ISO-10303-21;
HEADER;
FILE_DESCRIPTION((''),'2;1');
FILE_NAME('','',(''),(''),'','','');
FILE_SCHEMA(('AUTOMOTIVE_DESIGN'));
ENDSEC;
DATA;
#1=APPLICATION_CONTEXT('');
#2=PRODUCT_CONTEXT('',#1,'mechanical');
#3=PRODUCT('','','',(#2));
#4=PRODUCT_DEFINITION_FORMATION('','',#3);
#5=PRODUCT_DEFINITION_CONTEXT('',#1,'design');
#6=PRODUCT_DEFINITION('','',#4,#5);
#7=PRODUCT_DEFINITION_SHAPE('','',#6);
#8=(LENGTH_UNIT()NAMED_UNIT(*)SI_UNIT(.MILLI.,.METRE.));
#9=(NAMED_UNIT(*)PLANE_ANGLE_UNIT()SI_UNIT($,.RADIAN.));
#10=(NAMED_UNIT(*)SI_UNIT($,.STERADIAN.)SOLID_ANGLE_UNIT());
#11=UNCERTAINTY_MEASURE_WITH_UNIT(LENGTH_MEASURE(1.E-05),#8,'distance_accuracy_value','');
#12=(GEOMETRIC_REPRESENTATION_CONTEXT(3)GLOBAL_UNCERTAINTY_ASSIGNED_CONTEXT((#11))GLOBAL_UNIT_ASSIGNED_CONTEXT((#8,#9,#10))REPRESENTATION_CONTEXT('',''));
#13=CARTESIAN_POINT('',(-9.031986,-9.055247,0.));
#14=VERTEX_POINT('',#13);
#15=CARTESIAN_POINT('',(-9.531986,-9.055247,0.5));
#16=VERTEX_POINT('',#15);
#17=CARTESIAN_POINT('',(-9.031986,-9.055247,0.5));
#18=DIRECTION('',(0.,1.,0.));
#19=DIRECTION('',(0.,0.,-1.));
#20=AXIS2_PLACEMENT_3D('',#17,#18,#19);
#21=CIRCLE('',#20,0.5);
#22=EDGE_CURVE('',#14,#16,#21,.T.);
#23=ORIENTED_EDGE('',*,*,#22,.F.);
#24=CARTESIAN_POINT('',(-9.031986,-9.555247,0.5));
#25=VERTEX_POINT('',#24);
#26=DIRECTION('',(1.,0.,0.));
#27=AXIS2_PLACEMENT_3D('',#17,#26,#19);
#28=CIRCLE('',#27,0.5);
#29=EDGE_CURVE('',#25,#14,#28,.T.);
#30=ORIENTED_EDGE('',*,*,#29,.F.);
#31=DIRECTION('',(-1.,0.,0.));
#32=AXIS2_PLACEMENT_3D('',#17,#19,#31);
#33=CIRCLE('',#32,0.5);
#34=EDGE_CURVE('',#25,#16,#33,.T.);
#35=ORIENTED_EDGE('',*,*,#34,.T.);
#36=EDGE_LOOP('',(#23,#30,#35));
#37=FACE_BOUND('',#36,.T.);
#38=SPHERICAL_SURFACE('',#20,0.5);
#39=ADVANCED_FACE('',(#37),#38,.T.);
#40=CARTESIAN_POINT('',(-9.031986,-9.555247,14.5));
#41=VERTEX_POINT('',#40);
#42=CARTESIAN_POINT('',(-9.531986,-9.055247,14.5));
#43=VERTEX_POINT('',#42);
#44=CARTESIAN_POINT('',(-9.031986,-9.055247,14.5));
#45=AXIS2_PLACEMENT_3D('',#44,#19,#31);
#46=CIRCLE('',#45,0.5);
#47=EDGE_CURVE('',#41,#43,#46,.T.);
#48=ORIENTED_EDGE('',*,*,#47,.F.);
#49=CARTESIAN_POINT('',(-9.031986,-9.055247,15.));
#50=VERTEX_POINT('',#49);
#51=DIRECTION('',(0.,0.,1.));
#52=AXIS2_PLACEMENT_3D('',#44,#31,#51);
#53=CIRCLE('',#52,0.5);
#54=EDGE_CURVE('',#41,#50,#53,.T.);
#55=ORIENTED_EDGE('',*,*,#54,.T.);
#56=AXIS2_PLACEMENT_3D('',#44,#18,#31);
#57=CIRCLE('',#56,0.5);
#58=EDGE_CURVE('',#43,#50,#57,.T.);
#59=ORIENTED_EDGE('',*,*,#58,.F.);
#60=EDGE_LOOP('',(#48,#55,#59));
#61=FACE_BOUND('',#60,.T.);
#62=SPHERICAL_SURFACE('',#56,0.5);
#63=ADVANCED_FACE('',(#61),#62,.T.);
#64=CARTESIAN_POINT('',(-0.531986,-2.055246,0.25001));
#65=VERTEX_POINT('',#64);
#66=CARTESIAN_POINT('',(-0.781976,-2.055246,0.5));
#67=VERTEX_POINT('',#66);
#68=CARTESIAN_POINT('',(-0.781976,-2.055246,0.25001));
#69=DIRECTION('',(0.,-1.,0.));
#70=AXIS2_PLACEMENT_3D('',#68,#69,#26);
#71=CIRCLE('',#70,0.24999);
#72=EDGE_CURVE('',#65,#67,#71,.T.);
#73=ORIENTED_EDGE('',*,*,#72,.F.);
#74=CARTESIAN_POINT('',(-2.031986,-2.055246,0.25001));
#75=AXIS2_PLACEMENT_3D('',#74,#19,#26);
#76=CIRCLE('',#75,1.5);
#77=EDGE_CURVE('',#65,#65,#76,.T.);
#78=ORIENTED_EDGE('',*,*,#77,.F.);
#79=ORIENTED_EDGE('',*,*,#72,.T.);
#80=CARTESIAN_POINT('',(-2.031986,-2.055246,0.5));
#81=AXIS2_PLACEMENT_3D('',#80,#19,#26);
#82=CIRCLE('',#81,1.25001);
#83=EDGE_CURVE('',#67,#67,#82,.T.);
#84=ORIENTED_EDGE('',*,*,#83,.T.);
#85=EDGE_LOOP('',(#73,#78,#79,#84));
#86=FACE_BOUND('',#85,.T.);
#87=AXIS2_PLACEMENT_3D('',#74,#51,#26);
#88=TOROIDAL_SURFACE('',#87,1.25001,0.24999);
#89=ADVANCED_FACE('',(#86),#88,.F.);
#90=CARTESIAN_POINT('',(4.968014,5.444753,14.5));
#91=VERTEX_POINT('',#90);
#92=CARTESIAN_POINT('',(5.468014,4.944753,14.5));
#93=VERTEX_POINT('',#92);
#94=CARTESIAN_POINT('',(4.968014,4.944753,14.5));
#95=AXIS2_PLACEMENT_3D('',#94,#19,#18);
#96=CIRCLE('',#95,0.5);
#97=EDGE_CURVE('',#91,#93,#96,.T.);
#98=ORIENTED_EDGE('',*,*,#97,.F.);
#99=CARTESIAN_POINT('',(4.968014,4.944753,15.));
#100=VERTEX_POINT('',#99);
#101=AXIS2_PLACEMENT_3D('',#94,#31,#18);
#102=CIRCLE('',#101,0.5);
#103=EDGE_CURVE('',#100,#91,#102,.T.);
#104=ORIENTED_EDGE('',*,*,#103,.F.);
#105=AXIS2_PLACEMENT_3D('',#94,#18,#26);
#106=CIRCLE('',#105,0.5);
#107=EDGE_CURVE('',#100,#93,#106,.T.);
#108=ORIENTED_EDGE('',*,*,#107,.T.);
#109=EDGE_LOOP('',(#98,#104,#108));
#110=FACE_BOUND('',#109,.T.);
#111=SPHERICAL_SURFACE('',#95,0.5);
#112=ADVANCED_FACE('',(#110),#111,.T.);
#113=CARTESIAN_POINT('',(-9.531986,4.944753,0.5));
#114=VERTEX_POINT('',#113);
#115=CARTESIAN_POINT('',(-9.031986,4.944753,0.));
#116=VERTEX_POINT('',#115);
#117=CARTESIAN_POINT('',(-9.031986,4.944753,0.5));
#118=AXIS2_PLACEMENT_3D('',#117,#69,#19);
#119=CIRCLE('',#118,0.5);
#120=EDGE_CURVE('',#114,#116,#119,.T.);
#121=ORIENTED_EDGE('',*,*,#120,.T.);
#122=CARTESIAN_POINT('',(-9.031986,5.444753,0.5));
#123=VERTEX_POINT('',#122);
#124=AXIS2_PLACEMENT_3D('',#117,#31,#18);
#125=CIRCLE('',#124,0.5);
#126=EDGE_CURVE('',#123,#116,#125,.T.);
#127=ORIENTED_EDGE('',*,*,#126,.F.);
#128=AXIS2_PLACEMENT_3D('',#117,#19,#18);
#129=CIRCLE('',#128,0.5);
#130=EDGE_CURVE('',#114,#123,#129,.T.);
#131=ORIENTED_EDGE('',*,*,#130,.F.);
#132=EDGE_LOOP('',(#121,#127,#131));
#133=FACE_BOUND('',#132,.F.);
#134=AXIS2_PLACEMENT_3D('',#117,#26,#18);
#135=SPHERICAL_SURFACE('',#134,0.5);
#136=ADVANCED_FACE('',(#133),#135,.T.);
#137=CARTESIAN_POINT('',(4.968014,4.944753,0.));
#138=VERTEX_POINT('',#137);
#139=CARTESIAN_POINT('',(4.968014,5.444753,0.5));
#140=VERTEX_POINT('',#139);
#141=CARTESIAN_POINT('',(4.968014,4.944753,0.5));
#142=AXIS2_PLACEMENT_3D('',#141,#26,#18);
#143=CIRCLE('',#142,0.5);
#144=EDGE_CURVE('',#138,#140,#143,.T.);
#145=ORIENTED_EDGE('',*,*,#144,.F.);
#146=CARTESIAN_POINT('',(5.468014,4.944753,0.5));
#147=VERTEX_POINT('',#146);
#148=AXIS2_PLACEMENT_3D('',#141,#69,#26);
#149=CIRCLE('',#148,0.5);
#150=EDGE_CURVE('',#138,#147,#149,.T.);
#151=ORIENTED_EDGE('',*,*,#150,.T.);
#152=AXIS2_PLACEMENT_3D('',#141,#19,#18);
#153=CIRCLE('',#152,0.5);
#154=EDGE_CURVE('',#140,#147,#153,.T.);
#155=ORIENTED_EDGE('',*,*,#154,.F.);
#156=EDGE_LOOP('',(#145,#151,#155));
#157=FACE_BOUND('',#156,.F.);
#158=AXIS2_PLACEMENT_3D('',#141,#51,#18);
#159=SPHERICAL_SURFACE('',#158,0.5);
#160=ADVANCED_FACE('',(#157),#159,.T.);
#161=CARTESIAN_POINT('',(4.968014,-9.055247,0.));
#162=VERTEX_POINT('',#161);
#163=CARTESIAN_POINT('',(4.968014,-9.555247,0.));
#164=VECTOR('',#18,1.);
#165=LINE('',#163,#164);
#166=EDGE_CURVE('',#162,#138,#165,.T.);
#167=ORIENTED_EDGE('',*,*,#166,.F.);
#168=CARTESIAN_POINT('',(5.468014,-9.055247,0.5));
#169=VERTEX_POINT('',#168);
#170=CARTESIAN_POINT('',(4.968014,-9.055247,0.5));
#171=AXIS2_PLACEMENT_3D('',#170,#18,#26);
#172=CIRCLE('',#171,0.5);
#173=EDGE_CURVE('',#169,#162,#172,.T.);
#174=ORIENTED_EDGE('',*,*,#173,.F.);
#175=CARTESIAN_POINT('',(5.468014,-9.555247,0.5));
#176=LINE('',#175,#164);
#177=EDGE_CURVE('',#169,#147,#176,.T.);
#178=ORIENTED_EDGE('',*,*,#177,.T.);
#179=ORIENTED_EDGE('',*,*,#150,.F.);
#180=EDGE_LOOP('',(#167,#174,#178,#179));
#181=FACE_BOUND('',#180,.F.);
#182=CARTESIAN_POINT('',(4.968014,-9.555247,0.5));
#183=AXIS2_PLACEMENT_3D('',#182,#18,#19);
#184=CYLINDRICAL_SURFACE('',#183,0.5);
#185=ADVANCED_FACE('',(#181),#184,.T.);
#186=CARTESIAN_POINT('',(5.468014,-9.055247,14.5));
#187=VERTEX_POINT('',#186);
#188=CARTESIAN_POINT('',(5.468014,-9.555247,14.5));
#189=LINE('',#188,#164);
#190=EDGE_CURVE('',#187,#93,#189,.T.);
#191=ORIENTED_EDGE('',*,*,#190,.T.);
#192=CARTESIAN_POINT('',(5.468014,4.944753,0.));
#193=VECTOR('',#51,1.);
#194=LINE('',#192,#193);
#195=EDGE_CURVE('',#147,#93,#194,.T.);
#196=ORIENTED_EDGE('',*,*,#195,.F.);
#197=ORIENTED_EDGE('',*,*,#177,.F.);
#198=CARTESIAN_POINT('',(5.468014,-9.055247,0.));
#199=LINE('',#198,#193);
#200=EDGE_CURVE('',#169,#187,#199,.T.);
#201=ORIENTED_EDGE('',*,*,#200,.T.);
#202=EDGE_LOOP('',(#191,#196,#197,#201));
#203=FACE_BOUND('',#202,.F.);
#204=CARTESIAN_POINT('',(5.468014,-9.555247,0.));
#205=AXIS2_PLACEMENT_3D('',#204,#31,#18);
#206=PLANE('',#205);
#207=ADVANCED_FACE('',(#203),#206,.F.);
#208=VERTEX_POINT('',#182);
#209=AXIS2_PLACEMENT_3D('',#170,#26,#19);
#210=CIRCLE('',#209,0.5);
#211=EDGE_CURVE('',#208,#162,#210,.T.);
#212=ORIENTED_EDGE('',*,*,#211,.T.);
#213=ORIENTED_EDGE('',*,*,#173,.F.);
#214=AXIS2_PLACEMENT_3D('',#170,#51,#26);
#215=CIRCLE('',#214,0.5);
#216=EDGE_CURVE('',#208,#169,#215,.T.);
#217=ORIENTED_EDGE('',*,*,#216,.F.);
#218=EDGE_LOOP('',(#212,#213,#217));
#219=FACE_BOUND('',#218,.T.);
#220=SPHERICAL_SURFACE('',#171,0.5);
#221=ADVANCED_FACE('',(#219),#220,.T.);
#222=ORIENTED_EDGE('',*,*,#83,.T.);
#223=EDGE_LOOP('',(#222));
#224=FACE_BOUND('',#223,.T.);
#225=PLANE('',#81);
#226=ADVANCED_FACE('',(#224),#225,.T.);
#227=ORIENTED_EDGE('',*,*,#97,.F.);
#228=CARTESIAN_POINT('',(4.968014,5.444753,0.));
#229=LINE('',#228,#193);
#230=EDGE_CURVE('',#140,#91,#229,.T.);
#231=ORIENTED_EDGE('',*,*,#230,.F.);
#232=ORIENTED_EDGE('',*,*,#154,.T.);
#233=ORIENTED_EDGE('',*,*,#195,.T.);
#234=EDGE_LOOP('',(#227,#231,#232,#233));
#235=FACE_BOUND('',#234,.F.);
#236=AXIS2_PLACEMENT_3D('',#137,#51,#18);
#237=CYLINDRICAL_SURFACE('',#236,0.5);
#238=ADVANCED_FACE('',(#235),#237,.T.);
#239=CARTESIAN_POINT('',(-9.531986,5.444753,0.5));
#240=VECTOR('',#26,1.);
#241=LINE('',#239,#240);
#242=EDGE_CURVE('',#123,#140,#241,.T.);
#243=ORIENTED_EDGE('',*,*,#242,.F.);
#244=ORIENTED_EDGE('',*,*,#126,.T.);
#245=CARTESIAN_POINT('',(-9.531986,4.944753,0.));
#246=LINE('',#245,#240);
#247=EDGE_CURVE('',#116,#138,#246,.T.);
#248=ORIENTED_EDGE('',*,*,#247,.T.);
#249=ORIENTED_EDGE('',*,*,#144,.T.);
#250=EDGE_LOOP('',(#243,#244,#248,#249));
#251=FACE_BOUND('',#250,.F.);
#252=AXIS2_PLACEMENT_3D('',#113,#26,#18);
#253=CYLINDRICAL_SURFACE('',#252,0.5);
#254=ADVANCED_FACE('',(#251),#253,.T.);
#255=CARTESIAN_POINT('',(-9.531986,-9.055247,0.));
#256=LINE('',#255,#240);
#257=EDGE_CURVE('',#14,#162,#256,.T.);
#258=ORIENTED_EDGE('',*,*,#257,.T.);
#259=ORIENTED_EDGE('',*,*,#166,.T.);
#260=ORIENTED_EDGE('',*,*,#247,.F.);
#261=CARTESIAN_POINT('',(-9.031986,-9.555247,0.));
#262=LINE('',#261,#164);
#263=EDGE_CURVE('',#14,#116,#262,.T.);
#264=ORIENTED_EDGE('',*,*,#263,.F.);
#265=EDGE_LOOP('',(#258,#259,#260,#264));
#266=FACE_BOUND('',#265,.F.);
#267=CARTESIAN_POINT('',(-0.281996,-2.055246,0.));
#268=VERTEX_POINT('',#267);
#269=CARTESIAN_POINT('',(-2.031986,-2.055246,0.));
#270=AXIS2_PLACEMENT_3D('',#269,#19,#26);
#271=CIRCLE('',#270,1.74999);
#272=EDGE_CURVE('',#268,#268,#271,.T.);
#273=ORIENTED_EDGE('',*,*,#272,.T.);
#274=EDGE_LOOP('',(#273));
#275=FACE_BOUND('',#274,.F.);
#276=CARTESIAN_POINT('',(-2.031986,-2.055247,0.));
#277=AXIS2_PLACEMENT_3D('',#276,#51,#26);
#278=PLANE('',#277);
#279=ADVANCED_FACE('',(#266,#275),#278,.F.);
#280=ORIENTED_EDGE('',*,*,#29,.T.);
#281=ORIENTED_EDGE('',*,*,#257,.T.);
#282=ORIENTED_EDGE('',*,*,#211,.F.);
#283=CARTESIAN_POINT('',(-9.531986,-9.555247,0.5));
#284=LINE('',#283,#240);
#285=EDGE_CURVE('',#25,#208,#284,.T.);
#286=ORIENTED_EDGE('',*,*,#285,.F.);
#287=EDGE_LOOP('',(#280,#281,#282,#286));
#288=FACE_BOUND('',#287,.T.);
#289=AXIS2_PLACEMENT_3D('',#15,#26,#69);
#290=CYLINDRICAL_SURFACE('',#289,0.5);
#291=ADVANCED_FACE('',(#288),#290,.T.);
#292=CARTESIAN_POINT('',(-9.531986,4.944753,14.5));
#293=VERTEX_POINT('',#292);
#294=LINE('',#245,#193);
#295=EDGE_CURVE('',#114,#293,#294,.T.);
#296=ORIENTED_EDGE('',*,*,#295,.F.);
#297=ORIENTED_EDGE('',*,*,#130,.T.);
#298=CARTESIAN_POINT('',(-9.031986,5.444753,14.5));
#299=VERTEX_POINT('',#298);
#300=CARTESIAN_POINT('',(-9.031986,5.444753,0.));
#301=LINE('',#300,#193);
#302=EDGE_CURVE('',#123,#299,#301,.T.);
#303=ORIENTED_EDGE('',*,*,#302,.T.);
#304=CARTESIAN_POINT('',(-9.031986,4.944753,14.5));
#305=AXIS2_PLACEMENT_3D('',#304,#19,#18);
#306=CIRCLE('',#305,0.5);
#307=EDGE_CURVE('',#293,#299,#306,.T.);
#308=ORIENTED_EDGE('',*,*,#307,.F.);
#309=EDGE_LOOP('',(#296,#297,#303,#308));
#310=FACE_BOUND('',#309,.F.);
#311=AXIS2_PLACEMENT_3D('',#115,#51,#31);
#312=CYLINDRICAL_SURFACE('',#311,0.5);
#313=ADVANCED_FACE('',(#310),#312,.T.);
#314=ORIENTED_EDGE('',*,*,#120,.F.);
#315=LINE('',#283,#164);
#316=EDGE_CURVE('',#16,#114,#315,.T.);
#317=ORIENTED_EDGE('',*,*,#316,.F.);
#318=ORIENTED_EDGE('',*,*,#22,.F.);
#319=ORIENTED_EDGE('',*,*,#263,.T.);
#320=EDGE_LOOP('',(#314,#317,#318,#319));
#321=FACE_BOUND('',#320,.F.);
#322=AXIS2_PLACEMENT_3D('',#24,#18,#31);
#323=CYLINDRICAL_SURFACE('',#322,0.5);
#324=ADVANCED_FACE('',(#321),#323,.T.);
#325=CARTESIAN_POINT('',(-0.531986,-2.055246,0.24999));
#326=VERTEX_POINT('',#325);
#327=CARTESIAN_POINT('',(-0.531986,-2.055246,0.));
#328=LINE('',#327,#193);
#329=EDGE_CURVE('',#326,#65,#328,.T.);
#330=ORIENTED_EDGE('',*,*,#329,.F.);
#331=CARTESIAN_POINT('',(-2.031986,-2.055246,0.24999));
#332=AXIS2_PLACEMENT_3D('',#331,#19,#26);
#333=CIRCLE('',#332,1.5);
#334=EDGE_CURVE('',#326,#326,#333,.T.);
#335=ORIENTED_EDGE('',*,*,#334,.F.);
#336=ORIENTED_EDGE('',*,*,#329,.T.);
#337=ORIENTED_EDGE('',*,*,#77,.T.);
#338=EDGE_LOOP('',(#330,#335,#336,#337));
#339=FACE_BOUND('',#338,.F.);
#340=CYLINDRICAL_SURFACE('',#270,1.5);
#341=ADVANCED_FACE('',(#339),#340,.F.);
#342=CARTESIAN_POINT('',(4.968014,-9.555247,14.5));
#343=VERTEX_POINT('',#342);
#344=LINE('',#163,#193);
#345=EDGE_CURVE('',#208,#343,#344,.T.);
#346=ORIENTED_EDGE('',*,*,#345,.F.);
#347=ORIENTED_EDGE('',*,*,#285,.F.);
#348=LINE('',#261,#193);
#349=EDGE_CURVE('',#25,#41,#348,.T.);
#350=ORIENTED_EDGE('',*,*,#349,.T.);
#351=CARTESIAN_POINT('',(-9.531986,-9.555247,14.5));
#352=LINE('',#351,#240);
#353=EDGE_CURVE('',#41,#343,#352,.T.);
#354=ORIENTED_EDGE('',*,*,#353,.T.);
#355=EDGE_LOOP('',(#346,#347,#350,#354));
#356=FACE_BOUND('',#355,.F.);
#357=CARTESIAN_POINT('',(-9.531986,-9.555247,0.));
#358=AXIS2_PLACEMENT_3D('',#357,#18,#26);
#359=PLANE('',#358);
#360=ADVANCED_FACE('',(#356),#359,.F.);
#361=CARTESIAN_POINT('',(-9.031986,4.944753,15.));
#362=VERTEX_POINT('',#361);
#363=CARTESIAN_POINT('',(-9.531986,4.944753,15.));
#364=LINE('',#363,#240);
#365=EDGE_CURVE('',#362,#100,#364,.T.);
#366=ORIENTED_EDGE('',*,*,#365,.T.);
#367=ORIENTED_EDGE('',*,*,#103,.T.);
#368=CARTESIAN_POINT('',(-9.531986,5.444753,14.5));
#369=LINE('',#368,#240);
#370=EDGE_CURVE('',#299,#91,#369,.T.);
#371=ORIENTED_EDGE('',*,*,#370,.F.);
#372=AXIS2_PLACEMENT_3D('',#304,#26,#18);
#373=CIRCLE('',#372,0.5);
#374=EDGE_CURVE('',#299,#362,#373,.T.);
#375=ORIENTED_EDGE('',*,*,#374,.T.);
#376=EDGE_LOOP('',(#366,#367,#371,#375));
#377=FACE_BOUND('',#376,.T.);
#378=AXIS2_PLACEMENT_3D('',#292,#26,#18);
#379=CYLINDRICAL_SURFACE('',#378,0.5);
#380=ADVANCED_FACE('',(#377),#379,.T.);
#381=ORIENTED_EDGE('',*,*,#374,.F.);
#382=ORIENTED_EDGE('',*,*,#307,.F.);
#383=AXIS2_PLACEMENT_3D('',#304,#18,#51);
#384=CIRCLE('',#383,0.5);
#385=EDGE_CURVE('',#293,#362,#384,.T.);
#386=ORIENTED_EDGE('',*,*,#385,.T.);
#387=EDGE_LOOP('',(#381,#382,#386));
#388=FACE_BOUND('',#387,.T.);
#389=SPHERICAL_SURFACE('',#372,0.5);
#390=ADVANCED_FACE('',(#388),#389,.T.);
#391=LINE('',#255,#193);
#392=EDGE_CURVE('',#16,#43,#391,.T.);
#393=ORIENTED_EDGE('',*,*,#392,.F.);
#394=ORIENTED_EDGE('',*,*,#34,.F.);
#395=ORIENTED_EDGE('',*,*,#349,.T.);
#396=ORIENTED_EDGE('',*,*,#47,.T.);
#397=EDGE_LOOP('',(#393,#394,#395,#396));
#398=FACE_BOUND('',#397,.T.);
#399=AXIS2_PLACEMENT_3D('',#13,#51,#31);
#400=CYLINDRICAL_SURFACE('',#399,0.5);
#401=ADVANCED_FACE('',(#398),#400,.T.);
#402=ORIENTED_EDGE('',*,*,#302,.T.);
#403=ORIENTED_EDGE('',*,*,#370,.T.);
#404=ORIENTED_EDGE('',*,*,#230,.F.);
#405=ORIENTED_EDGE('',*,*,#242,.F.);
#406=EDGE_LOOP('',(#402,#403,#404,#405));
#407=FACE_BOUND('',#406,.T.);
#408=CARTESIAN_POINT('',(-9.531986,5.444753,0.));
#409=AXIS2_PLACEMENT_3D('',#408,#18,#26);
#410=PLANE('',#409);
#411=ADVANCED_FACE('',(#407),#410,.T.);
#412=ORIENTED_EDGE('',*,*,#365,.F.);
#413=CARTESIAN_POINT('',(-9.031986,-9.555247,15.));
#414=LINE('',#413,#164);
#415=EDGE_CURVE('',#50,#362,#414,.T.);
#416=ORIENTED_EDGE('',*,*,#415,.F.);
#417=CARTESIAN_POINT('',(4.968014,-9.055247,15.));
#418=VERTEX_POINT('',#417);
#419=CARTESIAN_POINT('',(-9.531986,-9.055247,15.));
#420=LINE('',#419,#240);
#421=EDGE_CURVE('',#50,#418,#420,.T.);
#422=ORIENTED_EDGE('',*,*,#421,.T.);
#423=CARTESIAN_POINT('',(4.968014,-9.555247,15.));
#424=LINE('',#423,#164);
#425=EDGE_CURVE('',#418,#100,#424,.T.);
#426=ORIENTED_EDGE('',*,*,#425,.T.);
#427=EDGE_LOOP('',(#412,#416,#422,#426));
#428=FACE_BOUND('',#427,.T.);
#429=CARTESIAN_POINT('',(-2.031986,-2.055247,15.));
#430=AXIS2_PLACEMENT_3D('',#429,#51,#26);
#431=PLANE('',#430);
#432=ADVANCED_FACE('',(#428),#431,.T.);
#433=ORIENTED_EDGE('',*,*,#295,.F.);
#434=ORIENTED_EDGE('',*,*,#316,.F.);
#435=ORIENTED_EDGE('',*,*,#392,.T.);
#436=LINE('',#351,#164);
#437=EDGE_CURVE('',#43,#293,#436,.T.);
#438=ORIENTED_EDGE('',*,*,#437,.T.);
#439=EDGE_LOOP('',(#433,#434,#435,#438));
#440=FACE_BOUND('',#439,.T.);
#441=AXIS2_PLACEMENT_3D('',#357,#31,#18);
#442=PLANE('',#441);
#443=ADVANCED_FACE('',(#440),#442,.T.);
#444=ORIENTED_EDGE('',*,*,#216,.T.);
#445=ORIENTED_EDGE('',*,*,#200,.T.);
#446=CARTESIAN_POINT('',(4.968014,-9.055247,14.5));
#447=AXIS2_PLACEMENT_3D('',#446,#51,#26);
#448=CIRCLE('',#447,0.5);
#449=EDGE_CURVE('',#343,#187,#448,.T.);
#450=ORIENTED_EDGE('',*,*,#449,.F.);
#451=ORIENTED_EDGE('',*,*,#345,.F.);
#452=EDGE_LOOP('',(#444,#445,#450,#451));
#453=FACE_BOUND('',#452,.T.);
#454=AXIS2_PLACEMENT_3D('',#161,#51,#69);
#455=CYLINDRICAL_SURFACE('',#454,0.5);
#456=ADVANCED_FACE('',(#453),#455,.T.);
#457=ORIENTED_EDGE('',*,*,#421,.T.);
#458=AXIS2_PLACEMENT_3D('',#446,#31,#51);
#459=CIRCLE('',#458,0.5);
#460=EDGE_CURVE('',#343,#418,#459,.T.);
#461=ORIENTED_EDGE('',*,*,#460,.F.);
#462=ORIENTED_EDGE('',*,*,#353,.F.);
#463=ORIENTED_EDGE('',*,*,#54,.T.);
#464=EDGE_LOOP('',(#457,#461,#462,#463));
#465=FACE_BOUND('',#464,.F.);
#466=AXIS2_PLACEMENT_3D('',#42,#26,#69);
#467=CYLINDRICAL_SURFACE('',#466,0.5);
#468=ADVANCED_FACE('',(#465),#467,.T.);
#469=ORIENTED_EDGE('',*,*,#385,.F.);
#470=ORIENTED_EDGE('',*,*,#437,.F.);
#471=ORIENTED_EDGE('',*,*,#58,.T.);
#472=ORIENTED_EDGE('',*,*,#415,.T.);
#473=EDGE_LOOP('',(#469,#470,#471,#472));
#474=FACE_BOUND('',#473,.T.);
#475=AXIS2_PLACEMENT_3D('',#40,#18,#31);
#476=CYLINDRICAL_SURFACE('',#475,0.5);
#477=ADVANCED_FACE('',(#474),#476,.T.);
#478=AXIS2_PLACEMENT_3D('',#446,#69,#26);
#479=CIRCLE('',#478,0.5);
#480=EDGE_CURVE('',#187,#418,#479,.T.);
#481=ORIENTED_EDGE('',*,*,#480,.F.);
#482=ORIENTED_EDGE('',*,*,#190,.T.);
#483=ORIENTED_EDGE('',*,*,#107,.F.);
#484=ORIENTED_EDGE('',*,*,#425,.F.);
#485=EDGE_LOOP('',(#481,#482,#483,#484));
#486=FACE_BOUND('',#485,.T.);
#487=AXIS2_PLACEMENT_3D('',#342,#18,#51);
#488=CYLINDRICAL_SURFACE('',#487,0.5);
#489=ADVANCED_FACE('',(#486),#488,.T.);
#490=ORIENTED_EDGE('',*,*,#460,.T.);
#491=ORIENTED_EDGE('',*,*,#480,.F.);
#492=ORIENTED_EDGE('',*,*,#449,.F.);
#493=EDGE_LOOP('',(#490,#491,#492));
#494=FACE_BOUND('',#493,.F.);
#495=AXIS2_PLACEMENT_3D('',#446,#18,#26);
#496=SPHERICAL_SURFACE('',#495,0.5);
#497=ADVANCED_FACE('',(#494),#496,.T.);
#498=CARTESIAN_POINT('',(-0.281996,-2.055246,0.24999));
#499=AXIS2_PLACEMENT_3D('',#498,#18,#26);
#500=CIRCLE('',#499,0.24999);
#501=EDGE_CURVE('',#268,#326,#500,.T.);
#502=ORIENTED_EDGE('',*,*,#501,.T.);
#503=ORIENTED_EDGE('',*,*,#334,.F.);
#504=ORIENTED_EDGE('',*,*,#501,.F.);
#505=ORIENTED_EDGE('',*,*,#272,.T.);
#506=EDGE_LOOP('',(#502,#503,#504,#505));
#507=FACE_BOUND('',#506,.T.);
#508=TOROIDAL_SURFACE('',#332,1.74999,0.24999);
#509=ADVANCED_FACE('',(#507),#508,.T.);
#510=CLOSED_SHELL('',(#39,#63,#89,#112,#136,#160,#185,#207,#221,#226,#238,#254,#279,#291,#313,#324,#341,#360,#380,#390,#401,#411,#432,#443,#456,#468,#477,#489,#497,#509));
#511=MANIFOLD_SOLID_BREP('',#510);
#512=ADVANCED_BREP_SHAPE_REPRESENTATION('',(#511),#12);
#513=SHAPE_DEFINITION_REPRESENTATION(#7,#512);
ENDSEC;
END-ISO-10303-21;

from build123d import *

# Parameters (mm, degrees)
F0_W     = 15
F0_H     = 15
F1_DEPTH = 15
F2_R     = 1.5
F3_DEPTH = 0.5
F4_R     = 0.5
F5_R     = 0.24999


# Not quite as in the source:
# - a fillet or chamfer is up to 0.001 mm smaller than in the source, because OpenCascade refuses the exact size
# - a feature names something its author has since deleted; it is built from what else it names


with BuildPart() as f1:
    # F0 (on Top) → F1 (new body)
    with BuildSketch(Plane.XY):
        with Locations((-2.0319856703, -2.0552466768)):
            Rectangle(F0_W, F0_H)
    extrude(amount=F1_DEPTH)

    # F2 (on face) → F3 (cut)
    with BuildSketch(Plane(origin=(0, 0, 0), x_dir=(1, 0, 0), z_dir=(0, 0, -1))):
        with Locations((-2.0319856703, 2.0552456845)):
            Circle(F2_R)
    extrude(amount=-F3_DEPTH, mode=Mode.SUBTRACT)

    # F4
    f4_edges = [f1.edges().sort_by_distance(p)[0] for p in [
        (5.468014, 5.444753, 7.5),
        (-2.031986, 5.444753, 0),
        (-2.031986, 5.444753, 15),
        (-9.531986, 5.444753, 7.5),
        (5.468014, -2.055247, 0),
        (5.468014, -2.055247, 15),
        (5.468014, -9.555247, 7.5),
        (-9.531986, -2.055247, 0),
        (-2.031986, -9.555247, 0),
        (-9.531986, -2.055247, 15),
        (-9.531986, -9.555247, 7.5),
        (-2.031986, -9.555247, 15),
    ]]
    fillet(f4_edges, radius=F4_R)

    # F5 (radius 0.25 in the source; OpenCascade refuses exactly that, so slightly less here)
    f5_edges = [f1.edges().sort_by_distance(p)[0] for p in [
        (-3.531986, -2.055246, 0.5),
        (-3.531986, -2.055246, 0),
    ]]
    fillet(f5_edges, radius=F5_R)


solid = f1.part
